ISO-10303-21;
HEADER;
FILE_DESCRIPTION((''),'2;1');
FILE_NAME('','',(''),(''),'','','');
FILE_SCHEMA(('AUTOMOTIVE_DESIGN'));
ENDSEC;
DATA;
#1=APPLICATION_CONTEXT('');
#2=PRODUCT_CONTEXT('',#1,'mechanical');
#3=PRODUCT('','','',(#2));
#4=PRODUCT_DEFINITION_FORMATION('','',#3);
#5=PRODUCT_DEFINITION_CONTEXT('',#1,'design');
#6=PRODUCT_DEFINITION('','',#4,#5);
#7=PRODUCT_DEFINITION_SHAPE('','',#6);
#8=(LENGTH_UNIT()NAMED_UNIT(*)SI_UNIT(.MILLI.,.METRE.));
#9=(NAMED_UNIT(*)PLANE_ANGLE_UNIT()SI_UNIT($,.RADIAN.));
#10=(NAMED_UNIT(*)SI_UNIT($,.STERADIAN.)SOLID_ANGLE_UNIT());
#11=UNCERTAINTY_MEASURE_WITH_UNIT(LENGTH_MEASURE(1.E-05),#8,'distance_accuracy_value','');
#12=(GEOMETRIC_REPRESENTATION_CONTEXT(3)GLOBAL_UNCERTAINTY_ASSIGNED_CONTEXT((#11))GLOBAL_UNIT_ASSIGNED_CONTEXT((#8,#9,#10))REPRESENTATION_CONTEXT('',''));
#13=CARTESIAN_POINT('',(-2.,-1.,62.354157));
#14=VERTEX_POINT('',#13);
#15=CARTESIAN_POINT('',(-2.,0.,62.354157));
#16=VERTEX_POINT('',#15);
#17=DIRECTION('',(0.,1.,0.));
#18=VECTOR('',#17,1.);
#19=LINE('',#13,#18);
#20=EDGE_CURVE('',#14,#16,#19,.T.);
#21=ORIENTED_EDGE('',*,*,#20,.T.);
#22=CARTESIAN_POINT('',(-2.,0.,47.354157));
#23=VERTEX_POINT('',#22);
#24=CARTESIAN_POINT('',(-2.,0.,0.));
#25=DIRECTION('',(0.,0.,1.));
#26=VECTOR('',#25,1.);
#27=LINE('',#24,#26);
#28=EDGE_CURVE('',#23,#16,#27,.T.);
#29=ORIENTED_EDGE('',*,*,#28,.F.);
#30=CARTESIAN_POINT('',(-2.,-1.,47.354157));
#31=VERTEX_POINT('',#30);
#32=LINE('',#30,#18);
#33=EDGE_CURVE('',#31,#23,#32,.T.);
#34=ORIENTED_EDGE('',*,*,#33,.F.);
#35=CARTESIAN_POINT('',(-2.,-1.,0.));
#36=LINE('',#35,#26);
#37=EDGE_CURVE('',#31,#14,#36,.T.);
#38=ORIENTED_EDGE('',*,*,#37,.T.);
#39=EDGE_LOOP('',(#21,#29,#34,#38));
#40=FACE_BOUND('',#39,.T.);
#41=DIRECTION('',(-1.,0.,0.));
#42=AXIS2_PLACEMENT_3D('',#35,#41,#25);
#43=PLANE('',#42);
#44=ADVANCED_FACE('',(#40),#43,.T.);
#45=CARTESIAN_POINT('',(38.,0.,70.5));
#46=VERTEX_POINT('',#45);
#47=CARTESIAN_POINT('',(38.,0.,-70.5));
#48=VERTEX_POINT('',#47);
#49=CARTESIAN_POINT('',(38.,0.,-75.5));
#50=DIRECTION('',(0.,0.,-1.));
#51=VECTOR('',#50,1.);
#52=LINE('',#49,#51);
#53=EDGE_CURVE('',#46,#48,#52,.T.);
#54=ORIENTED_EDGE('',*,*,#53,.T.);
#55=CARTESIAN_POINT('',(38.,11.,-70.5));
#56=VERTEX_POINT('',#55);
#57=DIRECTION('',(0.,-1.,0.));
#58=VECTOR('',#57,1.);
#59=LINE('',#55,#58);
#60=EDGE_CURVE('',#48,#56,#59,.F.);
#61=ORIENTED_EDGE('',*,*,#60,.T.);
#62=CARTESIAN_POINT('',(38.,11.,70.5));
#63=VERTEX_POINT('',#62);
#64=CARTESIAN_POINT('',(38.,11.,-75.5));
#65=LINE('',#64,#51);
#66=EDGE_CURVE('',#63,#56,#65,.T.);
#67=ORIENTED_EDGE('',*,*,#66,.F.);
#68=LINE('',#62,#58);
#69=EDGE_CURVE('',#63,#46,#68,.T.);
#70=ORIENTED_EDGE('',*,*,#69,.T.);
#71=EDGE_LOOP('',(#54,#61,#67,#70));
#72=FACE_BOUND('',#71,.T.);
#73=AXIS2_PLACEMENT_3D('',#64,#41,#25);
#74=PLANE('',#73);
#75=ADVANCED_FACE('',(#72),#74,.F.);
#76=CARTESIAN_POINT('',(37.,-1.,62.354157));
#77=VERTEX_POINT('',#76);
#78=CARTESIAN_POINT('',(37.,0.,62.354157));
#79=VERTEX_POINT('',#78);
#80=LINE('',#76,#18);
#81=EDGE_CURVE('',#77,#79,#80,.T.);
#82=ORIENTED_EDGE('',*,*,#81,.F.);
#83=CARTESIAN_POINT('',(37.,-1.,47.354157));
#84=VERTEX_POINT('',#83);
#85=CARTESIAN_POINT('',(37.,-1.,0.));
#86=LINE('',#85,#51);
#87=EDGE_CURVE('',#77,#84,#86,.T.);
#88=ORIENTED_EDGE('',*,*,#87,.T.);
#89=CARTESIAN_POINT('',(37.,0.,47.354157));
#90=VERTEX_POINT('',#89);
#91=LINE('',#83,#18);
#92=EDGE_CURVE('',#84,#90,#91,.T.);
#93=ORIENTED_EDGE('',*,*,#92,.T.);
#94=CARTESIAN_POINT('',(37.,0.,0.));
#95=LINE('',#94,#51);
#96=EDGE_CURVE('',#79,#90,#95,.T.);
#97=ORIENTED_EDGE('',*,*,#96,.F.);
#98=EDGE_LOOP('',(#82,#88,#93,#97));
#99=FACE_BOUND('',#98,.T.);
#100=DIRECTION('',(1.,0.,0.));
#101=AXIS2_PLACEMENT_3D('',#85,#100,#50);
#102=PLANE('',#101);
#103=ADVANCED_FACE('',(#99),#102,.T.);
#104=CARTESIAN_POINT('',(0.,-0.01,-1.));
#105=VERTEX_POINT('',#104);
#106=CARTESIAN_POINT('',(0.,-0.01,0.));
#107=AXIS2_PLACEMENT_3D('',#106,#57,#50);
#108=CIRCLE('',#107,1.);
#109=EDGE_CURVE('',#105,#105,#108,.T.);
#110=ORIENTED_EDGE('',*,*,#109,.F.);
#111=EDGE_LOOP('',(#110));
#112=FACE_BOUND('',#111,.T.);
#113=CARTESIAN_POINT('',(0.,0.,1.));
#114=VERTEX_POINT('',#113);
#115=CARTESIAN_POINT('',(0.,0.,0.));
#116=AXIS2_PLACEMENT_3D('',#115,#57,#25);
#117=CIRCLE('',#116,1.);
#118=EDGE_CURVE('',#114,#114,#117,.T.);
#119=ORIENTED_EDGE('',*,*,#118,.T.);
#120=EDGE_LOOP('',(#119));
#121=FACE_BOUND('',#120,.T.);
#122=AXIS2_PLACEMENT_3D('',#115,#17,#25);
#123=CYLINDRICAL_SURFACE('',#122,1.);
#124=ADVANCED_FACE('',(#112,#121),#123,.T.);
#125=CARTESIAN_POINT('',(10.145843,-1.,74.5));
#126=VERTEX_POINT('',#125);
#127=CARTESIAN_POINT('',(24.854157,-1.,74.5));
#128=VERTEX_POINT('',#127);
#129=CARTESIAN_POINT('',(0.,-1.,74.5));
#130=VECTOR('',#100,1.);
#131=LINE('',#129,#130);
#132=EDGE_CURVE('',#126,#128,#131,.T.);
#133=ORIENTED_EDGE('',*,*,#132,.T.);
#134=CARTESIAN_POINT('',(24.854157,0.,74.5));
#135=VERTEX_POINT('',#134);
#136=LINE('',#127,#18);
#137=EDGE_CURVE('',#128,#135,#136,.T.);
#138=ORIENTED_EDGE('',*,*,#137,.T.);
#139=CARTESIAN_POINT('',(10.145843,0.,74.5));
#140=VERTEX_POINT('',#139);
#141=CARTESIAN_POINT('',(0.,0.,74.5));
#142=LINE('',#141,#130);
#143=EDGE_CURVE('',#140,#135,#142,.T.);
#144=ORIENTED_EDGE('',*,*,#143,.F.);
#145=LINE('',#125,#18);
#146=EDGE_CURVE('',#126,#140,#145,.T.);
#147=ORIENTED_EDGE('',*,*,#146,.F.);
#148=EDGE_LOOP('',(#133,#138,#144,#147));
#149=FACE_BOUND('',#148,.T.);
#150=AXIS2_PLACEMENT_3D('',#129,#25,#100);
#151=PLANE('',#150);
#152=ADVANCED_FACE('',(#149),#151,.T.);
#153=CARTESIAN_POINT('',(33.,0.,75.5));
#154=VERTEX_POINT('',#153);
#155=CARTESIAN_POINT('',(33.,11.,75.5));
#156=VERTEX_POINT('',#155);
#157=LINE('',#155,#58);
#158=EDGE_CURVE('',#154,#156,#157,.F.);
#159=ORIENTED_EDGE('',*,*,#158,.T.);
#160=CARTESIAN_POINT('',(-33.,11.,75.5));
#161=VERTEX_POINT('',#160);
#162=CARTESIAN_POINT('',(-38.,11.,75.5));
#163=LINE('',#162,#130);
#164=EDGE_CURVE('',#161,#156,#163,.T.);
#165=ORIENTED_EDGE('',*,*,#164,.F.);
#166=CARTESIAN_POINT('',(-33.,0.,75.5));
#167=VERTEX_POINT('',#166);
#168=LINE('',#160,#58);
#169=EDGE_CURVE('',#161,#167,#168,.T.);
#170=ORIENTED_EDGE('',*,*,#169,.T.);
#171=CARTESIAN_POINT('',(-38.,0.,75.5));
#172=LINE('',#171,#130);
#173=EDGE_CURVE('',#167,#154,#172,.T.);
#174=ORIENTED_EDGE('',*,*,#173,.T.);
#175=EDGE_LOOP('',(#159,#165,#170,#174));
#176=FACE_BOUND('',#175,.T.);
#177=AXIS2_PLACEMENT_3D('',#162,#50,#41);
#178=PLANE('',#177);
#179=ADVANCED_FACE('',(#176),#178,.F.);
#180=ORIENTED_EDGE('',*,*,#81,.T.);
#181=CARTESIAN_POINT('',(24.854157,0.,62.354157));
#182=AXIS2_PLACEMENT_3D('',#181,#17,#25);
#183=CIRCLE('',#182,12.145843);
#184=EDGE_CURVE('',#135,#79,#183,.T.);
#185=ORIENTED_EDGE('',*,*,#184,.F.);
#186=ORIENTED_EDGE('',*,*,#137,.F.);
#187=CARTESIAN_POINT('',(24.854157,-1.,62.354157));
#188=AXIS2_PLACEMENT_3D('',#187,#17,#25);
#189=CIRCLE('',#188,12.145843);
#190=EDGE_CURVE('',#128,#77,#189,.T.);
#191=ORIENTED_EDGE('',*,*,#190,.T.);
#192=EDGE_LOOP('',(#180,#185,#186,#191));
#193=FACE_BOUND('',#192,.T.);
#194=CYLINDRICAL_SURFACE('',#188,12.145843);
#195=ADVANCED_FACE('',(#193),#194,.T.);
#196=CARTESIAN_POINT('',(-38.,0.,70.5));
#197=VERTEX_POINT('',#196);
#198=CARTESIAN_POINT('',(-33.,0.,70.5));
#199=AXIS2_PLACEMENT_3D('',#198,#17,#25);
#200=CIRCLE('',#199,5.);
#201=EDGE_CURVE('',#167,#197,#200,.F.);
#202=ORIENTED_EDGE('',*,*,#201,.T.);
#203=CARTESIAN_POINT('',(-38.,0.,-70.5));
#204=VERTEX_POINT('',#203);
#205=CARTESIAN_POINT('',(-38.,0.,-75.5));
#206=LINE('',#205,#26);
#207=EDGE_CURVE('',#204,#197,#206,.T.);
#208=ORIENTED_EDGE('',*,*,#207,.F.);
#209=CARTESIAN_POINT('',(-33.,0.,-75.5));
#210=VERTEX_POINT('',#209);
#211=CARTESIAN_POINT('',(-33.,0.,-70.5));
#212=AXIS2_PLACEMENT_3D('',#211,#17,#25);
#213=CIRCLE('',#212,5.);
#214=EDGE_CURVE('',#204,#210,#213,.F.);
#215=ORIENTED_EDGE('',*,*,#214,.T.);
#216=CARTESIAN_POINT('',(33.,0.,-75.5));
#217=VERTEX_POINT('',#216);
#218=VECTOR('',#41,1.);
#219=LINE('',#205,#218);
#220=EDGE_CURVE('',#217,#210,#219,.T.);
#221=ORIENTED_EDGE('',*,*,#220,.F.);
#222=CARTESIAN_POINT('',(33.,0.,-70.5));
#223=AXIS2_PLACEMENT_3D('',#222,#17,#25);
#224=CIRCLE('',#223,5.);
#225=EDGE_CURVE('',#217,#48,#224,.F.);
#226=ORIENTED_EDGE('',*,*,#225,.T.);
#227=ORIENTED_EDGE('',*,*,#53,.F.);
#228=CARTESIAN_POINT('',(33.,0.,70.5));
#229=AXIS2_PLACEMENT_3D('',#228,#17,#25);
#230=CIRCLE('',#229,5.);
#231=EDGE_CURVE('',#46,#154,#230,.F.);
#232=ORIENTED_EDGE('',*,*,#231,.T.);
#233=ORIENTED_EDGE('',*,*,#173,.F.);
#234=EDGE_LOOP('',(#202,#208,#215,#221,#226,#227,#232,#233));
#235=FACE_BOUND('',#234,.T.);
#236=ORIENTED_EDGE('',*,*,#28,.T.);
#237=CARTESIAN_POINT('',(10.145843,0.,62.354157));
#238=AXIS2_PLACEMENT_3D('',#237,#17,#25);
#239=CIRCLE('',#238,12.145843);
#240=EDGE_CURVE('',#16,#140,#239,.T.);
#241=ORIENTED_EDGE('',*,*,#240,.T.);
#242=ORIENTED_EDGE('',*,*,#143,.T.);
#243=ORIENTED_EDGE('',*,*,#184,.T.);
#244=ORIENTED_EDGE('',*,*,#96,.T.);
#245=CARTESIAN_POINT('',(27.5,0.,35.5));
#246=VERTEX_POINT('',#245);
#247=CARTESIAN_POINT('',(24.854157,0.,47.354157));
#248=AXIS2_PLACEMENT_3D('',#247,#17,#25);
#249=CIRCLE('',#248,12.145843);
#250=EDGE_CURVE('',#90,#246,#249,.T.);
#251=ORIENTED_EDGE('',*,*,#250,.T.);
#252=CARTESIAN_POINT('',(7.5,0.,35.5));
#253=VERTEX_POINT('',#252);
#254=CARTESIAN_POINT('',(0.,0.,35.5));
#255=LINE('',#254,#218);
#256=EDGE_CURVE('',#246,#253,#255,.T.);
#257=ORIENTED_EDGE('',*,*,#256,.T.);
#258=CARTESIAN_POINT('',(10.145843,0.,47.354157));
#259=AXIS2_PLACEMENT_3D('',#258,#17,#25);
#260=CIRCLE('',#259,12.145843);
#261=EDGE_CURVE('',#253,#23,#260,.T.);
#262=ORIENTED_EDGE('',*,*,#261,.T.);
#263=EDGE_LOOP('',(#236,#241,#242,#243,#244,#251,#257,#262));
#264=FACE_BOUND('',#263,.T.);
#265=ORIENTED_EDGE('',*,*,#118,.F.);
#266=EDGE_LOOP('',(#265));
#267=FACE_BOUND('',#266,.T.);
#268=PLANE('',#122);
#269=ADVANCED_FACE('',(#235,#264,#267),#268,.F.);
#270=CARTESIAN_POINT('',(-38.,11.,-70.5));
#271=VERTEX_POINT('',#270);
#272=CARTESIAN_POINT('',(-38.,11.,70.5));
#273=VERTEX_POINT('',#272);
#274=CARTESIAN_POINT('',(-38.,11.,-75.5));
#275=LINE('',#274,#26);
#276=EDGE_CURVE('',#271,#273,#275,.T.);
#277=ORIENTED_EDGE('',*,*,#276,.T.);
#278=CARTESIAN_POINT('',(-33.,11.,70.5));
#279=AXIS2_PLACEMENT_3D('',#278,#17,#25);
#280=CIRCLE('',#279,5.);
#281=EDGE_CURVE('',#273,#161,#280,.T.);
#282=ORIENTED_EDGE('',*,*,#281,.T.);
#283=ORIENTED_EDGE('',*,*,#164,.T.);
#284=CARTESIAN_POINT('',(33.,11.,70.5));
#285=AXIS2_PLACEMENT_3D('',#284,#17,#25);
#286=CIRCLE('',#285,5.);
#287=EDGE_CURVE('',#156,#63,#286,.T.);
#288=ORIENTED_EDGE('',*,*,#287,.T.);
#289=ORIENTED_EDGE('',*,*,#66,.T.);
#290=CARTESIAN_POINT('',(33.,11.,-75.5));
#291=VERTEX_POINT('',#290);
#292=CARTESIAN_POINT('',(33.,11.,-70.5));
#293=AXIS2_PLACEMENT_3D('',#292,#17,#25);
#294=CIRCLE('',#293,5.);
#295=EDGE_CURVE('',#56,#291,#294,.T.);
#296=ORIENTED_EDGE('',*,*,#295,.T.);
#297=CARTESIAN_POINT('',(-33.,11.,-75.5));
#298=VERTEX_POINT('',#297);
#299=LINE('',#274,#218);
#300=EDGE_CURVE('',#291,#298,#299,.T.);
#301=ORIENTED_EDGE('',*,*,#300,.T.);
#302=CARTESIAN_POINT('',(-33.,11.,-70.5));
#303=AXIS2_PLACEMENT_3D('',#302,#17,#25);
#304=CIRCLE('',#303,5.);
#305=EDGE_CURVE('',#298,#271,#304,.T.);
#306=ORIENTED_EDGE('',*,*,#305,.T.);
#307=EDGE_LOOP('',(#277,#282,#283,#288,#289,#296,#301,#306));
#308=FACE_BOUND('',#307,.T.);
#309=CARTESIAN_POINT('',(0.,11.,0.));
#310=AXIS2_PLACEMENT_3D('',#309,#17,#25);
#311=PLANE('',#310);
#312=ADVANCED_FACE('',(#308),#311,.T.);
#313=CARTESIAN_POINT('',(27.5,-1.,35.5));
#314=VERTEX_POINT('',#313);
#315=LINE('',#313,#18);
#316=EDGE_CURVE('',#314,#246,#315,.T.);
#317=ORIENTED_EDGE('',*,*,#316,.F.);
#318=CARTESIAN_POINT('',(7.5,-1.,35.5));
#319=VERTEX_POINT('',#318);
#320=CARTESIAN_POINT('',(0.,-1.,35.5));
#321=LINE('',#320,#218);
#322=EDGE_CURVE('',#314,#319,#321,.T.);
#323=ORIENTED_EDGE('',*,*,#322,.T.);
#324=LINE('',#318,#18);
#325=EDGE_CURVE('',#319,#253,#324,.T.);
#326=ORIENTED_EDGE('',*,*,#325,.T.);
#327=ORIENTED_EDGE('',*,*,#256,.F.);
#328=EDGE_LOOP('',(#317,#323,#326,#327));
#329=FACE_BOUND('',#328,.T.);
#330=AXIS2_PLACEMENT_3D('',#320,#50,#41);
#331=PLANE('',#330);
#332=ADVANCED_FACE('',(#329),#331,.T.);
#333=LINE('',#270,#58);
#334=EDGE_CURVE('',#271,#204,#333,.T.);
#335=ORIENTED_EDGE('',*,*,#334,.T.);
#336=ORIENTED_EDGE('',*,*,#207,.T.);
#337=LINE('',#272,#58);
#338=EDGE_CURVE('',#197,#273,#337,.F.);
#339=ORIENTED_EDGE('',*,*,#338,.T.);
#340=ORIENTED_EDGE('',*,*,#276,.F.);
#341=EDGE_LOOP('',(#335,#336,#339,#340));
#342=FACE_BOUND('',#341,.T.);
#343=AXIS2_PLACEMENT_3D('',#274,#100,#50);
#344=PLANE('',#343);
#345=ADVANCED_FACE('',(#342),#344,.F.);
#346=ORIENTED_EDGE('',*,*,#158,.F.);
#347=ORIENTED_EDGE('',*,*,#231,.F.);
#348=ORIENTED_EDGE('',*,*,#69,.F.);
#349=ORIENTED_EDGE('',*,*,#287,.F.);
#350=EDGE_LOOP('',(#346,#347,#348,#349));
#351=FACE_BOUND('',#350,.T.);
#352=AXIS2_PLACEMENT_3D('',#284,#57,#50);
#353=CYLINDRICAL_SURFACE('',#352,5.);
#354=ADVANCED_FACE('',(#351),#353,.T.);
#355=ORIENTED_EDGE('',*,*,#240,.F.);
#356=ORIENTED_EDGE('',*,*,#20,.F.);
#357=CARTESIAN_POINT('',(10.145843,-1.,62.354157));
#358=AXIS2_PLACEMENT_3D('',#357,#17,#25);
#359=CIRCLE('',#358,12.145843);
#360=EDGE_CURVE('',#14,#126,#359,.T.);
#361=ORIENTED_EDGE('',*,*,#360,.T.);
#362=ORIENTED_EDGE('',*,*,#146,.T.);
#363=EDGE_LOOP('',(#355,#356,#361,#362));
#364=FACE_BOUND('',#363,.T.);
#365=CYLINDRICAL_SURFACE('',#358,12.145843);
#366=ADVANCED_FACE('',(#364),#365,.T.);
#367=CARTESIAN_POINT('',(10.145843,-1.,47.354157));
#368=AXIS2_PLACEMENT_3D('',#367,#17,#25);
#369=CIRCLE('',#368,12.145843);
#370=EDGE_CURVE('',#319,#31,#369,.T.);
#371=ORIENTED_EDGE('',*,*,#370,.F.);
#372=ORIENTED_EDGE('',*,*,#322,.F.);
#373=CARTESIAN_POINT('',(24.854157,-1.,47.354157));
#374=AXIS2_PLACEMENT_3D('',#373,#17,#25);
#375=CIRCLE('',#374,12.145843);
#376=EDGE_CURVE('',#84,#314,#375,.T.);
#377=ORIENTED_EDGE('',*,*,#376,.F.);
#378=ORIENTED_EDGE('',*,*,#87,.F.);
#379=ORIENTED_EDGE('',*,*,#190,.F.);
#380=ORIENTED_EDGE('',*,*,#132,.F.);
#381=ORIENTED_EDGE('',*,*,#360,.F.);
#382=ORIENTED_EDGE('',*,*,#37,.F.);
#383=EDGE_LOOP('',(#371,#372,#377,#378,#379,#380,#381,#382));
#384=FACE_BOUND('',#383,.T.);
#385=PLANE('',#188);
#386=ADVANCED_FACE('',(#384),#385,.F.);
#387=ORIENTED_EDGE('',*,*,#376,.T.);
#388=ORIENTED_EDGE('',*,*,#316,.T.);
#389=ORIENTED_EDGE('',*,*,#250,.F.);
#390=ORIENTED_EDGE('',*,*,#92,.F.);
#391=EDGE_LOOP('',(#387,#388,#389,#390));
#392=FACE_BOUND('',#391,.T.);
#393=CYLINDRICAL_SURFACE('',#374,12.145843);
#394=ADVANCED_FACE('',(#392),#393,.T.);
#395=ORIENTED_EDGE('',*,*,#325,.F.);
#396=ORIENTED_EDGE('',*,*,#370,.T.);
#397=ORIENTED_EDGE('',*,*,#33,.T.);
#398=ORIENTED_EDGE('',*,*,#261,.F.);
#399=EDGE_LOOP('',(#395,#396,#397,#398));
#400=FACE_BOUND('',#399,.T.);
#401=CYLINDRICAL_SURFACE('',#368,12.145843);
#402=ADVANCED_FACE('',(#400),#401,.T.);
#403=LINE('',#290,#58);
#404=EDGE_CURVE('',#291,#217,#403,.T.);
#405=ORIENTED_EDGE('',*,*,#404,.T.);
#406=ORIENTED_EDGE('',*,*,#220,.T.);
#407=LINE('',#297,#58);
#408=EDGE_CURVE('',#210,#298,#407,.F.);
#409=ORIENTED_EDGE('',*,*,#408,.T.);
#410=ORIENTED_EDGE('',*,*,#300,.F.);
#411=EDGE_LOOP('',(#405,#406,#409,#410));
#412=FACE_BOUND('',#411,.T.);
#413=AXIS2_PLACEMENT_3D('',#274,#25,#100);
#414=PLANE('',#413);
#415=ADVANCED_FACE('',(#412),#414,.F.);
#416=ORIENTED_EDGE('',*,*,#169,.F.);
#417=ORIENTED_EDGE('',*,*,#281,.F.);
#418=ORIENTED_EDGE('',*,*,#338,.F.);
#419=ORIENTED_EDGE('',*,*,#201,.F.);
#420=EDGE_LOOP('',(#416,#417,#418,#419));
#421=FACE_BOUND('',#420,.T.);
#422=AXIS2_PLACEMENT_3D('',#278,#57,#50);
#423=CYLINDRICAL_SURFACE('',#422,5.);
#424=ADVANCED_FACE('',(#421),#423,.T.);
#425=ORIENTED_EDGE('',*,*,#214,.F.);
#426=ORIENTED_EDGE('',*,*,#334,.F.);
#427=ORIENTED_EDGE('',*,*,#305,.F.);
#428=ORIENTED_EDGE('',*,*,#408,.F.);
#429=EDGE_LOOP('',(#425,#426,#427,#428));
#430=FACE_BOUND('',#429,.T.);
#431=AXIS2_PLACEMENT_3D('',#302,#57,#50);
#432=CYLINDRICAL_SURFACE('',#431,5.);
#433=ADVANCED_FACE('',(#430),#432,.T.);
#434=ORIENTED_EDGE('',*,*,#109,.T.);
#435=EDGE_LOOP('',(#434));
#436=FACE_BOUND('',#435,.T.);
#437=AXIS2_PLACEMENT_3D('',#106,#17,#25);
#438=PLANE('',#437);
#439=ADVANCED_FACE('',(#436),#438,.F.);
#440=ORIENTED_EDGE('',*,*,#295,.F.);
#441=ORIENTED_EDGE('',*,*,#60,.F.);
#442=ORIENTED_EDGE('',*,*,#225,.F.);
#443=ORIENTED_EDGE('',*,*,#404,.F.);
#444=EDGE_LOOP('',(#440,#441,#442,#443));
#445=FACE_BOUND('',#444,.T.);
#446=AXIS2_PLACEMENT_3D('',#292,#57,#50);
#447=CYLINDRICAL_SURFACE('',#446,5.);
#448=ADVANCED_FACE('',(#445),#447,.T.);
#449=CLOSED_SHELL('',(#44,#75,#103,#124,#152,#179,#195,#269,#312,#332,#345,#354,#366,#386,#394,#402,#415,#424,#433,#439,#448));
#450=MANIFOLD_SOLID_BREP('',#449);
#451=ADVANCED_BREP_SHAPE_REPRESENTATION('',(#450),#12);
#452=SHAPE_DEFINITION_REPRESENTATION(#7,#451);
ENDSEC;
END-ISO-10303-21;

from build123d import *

# Parameters (mm, degrees)
SKETCH_1_W       = 76
SKETCH_1_H       = 151
EXTRUDE_1_DEPTH  = 11
EXTRUDE_START    = -11
EXTRUDE_2_DEPTH  = 12
FILLET_1_R       = 5
WRAP_1_OUTLINE_R = 1
WRAP_1_DEPTH     = 0.01


# Read off the part's stored shape, not the designer's step: 包覆1
with BuildPart() as part:
    # 草图1 → 凸台-拉伸1 (new body)
    with BuildSketch(Plane(origin=(0, 0, 0), x_dir=(1, 0, 0), z_dir=(0, 1, 0))):
        Rectangle(SKETCH_1_W, SKETCH_1_H)
    extrude(amount=EXTRUDE_1_DEPTH)

    # 草图2 → 凸台-拉伸2 (add)
    with BuildSketch(Plane.XZ.offset(EXTRUDE_START)):
        with BuildLine():
            Line((10.145843496, 74.5), (24.854156504, 74.5))
            ThreePointArc((24.854156504, 74.5), (33.442564803, 70.942564803), (37, 62.354156504))
            Line((37, 62.354156504), (37, 47.354156504))
            ThreePointArc((37, 47.354156504), (34.331959922, 39.7585817), (27.5, 35.5))
            Line((27.5, 35.5), (7.5, 35.5))
            ThreePointArc((7.5, 35.5), (0.668040078, 39.7585817), (-2, 47.354156504))
            Line((-2, 47.354156504), (-2, 62.354156504))
            ThreePointArc((-2, 62.354156504), (1.557435197, 70.942564803), (10.145843496, 74.5))
        make_face()
    extrude(amount=EXTRUDE_2_DEPTH)

    # 圆角1
    fillet_1_edges = [part.edges().sort_by_distance(p)[0] for p in [
        (38, 5.5, 75.5),
        (-38, 5.5, 75.5),
        (-38, 5.5, -75.5),
        (38, 5.5, -75.5),
    ]]
    fillet(fillet_1_edges, radius=FILLET_1_R)

    # 包覆1 outline → 包覆1 (add)
    with BuildSketch(Plane.XZ):
        Circle(WRAP_1_OUTLINE_R)
    extrude(amount=WRAP_1_DEPTH)


solid = part.part
